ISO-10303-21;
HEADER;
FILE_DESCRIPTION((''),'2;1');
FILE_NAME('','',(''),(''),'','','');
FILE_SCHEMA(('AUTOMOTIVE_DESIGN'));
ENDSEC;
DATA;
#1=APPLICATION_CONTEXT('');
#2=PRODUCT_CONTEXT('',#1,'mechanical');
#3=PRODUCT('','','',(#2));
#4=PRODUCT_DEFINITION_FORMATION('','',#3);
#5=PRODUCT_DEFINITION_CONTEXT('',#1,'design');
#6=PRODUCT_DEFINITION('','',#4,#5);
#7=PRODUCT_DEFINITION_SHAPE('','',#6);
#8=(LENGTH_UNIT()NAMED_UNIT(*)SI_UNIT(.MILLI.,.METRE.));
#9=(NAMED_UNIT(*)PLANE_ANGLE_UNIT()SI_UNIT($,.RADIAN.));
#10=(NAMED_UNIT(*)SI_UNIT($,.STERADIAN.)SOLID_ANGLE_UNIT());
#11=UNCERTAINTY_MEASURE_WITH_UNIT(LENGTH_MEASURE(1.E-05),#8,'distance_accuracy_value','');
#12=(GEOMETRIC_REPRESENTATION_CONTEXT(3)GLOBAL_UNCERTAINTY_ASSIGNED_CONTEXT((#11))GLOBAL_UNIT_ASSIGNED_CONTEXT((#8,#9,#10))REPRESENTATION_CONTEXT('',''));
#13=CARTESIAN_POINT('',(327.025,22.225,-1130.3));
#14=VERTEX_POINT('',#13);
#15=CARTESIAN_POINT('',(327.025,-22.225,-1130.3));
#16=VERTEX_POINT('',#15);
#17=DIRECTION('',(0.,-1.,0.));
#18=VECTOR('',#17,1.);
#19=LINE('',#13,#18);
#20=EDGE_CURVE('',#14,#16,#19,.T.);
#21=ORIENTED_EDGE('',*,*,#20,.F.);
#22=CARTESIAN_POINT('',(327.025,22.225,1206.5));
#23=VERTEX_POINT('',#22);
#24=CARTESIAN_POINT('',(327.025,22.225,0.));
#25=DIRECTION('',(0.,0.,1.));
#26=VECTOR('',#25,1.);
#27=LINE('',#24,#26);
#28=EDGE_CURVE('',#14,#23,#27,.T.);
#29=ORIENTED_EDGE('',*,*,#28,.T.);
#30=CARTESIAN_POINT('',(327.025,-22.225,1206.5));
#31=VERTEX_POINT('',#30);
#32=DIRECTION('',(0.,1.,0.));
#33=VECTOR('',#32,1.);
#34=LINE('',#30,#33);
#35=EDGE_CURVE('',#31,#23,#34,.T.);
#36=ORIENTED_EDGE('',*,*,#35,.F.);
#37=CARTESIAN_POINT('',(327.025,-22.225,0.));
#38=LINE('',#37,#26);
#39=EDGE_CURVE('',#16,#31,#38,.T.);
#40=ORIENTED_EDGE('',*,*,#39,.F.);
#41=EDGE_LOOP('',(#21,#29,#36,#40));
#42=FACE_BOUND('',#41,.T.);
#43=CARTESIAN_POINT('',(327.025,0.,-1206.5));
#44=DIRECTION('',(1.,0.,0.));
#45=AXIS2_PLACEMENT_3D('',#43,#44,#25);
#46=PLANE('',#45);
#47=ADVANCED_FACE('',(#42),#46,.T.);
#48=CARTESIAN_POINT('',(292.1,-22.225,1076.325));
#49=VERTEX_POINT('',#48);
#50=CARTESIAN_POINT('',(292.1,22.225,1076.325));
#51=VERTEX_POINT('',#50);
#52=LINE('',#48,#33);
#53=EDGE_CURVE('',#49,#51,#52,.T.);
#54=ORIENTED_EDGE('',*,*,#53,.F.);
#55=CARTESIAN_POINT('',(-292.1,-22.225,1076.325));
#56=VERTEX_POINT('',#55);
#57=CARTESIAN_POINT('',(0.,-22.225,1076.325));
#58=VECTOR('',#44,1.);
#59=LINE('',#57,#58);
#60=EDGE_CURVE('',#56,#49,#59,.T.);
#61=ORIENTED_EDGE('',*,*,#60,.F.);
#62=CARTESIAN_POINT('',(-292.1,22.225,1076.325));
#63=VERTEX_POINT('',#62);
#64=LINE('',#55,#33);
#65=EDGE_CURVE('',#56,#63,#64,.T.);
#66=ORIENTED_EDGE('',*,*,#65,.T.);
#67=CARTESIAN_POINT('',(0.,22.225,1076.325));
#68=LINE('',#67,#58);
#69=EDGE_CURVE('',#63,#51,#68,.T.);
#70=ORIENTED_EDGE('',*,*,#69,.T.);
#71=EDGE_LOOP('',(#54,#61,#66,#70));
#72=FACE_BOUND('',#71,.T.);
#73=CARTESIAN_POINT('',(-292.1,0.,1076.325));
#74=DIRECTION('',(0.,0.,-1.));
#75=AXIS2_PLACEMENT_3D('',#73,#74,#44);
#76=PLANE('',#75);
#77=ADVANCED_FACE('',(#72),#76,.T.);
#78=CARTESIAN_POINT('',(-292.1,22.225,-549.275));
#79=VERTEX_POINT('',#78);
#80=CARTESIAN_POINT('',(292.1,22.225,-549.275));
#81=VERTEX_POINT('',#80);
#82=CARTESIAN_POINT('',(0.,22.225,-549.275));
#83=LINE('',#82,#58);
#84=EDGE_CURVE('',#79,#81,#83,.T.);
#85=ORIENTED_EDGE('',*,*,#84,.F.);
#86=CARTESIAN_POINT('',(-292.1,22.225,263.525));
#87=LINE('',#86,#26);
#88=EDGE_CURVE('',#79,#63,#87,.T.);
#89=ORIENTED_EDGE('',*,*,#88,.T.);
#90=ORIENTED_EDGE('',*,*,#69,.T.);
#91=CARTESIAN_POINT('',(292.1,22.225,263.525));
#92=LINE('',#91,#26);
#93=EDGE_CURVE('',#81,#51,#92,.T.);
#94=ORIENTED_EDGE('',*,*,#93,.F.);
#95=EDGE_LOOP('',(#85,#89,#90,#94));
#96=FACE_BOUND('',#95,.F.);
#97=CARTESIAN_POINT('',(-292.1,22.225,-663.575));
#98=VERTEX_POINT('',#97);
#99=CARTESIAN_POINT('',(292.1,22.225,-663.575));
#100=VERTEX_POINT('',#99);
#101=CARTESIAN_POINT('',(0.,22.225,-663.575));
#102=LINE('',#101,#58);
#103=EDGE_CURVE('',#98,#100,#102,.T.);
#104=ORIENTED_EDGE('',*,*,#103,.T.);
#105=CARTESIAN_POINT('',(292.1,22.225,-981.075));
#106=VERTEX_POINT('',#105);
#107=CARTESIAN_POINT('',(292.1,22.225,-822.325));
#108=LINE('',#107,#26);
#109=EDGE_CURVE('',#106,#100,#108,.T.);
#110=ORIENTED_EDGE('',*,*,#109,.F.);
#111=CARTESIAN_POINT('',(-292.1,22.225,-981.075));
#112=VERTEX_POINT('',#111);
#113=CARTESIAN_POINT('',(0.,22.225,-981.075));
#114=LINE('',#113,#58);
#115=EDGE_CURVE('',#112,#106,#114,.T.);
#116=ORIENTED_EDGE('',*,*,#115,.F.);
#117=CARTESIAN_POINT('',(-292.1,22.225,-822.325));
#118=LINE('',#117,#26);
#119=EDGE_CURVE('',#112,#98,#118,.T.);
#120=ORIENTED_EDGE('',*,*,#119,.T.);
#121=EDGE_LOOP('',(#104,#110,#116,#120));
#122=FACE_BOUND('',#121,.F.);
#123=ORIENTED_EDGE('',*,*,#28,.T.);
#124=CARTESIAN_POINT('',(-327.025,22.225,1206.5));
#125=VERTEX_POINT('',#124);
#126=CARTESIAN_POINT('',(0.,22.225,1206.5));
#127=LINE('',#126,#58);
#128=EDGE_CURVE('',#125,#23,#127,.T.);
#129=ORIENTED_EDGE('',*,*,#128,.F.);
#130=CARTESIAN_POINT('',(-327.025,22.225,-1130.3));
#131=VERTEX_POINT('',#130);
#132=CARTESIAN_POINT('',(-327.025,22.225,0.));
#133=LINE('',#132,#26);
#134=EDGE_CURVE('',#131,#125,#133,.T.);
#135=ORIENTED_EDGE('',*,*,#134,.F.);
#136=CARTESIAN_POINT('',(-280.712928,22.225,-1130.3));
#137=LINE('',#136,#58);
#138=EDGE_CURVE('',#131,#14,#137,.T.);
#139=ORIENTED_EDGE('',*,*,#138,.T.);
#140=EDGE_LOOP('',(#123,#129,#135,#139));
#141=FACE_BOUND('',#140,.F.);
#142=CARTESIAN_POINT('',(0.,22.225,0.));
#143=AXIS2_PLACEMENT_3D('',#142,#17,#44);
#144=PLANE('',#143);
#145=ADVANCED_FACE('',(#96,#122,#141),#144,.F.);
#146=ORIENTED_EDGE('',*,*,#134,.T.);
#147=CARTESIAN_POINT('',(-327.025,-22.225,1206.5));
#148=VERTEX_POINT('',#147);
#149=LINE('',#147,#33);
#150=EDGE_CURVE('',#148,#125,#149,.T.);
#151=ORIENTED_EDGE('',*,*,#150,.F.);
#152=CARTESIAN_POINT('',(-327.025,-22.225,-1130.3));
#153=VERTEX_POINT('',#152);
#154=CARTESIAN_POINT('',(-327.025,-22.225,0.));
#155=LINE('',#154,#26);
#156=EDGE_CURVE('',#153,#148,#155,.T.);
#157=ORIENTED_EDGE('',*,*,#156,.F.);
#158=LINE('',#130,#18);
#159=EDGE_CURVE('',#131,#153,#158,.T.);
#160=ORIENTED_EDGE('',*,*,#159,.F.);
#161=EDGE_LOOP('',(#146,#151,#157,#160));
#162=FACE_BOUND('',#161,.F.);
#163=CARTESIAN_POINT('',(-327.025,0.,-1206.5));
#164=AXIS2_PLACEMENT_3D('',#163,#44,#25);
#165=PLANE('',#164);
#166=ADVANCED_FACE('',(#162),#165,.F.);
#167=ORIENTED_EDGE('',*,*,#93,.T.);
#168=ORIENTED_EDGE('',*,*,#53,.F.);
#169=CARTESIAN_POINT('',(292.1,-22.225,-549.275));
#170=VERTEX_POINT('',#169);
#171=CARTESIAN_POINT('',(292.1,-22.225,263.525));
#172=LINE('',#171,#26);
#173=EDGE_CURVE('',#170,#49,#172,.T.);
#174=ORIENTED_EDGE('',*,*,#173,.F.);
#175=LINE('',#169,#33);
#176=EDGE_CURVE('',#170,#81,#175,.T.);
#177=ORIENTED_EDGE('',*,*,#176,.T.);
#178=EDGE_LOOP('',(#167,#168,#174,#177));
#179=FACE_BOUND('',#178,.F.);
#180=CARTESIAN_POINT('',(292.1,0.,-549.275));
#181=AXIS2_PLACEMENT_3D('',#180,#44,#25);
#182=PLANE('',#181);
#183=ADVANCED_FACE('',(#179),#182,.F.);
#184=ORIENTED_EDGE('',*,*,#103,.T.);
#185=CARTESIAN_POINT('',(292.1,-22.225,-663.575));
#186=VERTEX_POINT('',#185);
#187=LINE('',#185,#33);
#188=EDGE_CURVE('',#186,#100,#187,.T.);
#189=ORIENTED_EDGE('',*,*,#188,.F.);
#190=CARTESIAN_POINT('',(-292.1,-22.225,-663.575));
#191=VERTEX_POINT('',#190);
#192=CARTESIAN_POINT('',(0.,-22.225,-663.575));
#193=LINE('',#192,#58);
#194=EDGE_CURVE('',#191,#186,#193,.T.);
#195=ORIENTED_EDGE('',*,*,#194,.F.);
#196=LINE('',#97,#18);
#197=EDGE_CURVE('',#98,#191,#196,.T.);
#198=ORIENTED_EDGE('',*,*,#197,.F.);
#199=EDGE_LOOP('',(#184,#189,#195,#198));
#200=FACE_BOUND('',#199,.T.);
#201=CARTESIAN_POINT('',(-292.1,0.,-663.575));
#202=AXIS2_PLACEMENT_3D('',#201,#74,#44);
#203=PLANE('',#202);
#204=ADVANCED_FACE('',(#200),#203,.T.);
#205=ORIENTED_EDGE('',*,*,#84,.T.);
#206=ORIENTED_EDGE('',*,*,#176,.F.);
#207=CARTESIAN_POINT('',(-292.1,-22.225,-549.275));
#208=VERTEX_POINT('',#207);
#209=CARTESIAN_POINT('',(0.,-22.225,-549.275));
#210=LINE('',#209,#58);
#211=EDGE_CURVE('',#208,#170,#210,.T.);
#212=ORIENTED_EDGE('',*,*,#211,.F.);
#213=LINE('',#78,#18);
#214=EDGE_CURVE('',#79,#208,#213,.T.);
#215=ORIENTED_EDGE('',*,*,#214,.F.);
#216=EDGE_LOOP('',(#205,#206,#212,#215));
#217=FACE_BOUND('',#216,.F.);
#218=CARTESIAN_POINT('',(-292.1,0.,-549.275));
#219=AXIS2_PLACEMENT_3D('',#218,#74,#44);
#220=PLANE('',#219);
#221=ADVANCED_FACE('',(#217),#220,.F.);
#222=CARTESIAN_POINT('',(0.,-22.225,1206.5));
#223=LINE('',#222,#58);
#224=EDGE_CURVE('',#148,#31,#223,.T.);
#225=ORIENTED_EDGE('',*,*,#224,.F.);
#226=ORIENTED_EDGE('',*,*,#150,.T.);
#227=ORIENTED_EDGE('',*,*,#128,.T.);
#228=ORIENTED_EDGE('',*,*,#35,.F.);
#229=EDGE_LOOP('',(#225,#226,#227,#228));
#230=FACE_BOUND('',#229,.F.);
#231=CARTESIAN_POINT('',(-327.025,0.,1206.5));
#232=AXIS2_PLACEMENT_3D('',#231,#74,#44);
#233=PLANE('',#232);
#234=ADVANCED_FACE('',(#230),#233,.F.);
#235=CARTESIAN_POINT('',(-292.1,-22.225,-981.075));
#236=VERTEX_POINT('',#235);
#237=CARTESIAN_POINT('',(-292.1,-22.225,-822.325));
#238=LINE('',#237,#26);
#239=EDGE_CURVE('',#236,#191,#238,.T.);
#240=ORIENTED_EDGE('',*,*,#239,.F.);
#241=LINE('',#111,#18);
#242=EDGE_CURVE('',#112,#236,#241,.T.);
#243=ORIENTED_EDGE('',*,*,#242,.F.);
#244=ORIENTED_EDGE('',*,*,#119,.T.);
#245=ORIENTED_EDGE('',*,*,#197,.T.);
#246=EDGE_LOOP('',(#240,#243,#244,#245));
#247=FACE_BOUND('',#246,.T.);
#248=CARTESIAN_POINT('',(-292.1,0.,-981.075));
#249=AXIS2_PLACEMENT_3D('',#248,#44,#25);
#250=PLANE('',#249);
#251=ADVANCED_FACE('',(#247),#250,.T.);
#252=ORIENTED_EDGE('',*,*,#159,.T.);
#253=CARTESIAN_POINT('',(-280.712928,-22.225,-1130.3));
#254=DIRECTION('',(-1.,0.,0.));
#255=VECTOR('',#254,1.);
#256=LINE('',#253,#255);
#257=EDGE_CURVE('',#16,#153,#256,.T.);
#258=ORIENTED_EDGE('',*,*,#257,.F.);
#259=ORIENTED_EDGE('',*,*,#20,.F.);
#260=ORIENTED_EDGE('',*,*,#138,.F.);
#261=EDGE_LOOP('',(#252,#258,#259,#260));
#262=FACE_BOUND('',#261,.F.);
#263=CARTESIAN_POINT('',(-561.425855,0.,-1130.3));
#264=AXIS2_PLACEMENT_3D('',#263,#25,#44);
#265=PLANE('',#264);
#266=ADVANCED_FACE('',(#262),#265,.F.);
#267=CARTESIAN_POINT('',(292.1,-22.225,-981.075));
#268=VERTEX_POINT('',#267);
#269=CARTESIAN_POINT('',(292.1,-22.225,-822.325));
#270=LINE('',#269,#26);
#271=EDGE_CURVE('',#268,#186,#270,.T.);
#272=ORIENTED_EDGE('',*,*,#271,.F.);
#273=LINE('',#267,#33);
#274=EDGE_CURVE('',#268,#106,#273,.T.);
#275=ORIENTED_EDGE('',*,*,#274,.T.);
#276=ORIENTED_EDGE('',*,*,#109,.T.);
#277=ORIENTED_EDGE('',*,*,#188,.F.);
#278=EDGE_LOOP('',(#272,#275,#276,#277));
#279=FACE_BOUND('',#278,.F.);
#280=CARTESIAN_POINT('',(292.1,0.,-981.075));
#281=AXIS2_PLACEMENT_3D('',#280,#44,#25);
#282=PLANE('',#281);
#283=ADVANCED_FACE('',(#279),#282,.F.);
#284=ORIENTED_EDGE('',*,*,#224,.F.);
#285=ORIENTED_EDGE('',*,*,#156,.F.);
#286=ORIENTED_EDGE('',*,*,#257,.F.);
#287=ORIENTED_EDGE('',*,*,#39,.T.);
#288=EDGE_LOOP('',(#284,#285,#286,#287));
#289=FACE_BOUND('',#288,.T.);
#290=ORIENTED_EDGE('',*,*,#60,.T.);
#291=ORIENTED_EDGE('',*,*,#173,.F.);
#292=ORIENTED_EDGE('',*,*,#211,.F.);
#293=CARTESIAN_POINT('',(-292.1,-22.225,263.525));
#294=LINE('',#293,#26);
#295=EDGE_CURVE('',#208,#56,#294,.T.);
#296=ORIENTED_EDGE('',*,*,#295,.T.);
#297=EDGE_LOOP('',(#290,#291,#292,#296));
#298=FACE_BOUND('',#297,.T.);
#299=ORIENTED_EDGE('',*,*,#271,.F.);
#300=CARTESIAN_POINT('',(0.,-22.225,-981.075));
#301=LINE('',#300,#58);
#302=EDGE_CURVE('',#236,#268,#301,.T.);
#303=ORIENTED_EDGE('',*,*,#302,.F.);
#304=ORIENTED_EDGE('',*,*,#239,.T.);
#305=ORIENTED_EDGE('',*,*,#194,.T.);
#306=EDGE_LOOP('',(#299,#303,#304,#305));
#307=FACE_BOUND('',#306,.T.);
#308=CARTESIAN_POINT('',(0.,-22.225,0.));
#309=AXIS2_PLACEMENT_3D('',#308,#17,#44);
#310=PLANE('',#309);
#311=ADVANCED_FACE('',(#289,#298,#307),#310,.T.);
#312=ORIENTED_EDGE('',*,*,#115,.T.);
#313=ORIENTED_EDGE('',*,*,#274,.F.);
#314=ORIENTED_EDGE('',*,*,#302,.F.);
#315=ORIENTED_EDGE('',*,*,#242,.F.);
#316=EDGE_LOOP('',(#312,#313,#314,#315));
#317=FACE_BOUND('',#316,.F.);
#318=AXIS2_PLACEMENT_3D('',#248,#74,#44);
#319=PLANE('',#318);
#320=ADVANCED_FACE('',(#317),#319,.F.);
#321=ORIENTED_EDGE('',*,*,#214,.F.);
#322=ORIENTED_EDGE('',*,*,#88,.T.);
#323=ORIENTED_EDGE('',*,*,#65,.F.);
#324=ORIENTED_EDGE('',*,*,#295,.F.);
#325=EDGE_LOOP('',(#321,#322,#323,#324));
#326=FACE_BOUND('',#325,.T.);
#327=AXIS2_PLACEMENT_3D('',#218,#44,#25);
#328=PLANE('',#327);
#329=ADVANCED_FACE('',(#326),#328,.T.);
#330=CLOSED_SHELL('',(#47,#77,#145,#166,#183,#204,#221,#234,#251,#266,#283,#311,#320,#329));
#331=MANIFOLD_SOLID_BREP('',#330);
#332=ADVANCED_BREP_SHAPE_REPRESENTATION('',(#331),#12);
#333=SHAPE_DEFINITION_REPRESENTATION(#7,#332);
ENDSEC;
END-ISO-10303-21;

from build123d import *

# Parameters (mm, degrees)
F0_W          = 654.05
F0_H          = 2413
F0_W_2        = 584.2
F0_H_2        = 317.5
F0_H_3        = 1625.6
F1_DEPTH      = 22.225
F1_DEPTH_BACK = 22.225
F2_W          = 1248.5843106929
F2_H          = 271.0993243682
F2_H_2        = 504.0157202398
F3_DEPTH      = 22.226
F3_DEPTH_BACK = 22.226


# Not quite as in the source:
# - a length typed as a fraction of an inch, garbled in the dataset ("3 / 203.2 mm" for 3/8 in), is restored


with BuildPart() as f1:
    # F0 (on Front) → F1 (new body, two sides)
    with BuildSketch(Plane.XZ) as f1_sk:
        Rectangle(F0_W, F0_H)
        with Locations((0, -822.325)):
            Rectangle(F0_W_2, F0_H_2, mode=Mode.SUBTRACT)
        with Locations((0, 263.525)):
            Rectangle(F0_W_2, F0_H_3, mode=Mode.SUBTRACT)
    extrude(amount=F1_DEPTH)
    extrude(f1_sk.sketch, amount=-F1_DEPTH_BACK)

    # F2 (on Front) → F3 (cut, two sides)
    with BuildSketch(Plane.XZ) as f3_sk:
        with Locations((62.8663003445, 1342.0496621841)):
            Rectangle(F2_W, F2_H)
        with Locations((62.8663003445, -1382.3078601199)):
            Rectangle(F2_W, F2_H_2)
    extrude(amount=-F3_DEPTH, mode=Mode.SUBTRACT)
    extrude(f3_sk.sketch, amount=F3_DEPTH_BACK, mode=Mode.SUBTRACT)


solid = f1.part
